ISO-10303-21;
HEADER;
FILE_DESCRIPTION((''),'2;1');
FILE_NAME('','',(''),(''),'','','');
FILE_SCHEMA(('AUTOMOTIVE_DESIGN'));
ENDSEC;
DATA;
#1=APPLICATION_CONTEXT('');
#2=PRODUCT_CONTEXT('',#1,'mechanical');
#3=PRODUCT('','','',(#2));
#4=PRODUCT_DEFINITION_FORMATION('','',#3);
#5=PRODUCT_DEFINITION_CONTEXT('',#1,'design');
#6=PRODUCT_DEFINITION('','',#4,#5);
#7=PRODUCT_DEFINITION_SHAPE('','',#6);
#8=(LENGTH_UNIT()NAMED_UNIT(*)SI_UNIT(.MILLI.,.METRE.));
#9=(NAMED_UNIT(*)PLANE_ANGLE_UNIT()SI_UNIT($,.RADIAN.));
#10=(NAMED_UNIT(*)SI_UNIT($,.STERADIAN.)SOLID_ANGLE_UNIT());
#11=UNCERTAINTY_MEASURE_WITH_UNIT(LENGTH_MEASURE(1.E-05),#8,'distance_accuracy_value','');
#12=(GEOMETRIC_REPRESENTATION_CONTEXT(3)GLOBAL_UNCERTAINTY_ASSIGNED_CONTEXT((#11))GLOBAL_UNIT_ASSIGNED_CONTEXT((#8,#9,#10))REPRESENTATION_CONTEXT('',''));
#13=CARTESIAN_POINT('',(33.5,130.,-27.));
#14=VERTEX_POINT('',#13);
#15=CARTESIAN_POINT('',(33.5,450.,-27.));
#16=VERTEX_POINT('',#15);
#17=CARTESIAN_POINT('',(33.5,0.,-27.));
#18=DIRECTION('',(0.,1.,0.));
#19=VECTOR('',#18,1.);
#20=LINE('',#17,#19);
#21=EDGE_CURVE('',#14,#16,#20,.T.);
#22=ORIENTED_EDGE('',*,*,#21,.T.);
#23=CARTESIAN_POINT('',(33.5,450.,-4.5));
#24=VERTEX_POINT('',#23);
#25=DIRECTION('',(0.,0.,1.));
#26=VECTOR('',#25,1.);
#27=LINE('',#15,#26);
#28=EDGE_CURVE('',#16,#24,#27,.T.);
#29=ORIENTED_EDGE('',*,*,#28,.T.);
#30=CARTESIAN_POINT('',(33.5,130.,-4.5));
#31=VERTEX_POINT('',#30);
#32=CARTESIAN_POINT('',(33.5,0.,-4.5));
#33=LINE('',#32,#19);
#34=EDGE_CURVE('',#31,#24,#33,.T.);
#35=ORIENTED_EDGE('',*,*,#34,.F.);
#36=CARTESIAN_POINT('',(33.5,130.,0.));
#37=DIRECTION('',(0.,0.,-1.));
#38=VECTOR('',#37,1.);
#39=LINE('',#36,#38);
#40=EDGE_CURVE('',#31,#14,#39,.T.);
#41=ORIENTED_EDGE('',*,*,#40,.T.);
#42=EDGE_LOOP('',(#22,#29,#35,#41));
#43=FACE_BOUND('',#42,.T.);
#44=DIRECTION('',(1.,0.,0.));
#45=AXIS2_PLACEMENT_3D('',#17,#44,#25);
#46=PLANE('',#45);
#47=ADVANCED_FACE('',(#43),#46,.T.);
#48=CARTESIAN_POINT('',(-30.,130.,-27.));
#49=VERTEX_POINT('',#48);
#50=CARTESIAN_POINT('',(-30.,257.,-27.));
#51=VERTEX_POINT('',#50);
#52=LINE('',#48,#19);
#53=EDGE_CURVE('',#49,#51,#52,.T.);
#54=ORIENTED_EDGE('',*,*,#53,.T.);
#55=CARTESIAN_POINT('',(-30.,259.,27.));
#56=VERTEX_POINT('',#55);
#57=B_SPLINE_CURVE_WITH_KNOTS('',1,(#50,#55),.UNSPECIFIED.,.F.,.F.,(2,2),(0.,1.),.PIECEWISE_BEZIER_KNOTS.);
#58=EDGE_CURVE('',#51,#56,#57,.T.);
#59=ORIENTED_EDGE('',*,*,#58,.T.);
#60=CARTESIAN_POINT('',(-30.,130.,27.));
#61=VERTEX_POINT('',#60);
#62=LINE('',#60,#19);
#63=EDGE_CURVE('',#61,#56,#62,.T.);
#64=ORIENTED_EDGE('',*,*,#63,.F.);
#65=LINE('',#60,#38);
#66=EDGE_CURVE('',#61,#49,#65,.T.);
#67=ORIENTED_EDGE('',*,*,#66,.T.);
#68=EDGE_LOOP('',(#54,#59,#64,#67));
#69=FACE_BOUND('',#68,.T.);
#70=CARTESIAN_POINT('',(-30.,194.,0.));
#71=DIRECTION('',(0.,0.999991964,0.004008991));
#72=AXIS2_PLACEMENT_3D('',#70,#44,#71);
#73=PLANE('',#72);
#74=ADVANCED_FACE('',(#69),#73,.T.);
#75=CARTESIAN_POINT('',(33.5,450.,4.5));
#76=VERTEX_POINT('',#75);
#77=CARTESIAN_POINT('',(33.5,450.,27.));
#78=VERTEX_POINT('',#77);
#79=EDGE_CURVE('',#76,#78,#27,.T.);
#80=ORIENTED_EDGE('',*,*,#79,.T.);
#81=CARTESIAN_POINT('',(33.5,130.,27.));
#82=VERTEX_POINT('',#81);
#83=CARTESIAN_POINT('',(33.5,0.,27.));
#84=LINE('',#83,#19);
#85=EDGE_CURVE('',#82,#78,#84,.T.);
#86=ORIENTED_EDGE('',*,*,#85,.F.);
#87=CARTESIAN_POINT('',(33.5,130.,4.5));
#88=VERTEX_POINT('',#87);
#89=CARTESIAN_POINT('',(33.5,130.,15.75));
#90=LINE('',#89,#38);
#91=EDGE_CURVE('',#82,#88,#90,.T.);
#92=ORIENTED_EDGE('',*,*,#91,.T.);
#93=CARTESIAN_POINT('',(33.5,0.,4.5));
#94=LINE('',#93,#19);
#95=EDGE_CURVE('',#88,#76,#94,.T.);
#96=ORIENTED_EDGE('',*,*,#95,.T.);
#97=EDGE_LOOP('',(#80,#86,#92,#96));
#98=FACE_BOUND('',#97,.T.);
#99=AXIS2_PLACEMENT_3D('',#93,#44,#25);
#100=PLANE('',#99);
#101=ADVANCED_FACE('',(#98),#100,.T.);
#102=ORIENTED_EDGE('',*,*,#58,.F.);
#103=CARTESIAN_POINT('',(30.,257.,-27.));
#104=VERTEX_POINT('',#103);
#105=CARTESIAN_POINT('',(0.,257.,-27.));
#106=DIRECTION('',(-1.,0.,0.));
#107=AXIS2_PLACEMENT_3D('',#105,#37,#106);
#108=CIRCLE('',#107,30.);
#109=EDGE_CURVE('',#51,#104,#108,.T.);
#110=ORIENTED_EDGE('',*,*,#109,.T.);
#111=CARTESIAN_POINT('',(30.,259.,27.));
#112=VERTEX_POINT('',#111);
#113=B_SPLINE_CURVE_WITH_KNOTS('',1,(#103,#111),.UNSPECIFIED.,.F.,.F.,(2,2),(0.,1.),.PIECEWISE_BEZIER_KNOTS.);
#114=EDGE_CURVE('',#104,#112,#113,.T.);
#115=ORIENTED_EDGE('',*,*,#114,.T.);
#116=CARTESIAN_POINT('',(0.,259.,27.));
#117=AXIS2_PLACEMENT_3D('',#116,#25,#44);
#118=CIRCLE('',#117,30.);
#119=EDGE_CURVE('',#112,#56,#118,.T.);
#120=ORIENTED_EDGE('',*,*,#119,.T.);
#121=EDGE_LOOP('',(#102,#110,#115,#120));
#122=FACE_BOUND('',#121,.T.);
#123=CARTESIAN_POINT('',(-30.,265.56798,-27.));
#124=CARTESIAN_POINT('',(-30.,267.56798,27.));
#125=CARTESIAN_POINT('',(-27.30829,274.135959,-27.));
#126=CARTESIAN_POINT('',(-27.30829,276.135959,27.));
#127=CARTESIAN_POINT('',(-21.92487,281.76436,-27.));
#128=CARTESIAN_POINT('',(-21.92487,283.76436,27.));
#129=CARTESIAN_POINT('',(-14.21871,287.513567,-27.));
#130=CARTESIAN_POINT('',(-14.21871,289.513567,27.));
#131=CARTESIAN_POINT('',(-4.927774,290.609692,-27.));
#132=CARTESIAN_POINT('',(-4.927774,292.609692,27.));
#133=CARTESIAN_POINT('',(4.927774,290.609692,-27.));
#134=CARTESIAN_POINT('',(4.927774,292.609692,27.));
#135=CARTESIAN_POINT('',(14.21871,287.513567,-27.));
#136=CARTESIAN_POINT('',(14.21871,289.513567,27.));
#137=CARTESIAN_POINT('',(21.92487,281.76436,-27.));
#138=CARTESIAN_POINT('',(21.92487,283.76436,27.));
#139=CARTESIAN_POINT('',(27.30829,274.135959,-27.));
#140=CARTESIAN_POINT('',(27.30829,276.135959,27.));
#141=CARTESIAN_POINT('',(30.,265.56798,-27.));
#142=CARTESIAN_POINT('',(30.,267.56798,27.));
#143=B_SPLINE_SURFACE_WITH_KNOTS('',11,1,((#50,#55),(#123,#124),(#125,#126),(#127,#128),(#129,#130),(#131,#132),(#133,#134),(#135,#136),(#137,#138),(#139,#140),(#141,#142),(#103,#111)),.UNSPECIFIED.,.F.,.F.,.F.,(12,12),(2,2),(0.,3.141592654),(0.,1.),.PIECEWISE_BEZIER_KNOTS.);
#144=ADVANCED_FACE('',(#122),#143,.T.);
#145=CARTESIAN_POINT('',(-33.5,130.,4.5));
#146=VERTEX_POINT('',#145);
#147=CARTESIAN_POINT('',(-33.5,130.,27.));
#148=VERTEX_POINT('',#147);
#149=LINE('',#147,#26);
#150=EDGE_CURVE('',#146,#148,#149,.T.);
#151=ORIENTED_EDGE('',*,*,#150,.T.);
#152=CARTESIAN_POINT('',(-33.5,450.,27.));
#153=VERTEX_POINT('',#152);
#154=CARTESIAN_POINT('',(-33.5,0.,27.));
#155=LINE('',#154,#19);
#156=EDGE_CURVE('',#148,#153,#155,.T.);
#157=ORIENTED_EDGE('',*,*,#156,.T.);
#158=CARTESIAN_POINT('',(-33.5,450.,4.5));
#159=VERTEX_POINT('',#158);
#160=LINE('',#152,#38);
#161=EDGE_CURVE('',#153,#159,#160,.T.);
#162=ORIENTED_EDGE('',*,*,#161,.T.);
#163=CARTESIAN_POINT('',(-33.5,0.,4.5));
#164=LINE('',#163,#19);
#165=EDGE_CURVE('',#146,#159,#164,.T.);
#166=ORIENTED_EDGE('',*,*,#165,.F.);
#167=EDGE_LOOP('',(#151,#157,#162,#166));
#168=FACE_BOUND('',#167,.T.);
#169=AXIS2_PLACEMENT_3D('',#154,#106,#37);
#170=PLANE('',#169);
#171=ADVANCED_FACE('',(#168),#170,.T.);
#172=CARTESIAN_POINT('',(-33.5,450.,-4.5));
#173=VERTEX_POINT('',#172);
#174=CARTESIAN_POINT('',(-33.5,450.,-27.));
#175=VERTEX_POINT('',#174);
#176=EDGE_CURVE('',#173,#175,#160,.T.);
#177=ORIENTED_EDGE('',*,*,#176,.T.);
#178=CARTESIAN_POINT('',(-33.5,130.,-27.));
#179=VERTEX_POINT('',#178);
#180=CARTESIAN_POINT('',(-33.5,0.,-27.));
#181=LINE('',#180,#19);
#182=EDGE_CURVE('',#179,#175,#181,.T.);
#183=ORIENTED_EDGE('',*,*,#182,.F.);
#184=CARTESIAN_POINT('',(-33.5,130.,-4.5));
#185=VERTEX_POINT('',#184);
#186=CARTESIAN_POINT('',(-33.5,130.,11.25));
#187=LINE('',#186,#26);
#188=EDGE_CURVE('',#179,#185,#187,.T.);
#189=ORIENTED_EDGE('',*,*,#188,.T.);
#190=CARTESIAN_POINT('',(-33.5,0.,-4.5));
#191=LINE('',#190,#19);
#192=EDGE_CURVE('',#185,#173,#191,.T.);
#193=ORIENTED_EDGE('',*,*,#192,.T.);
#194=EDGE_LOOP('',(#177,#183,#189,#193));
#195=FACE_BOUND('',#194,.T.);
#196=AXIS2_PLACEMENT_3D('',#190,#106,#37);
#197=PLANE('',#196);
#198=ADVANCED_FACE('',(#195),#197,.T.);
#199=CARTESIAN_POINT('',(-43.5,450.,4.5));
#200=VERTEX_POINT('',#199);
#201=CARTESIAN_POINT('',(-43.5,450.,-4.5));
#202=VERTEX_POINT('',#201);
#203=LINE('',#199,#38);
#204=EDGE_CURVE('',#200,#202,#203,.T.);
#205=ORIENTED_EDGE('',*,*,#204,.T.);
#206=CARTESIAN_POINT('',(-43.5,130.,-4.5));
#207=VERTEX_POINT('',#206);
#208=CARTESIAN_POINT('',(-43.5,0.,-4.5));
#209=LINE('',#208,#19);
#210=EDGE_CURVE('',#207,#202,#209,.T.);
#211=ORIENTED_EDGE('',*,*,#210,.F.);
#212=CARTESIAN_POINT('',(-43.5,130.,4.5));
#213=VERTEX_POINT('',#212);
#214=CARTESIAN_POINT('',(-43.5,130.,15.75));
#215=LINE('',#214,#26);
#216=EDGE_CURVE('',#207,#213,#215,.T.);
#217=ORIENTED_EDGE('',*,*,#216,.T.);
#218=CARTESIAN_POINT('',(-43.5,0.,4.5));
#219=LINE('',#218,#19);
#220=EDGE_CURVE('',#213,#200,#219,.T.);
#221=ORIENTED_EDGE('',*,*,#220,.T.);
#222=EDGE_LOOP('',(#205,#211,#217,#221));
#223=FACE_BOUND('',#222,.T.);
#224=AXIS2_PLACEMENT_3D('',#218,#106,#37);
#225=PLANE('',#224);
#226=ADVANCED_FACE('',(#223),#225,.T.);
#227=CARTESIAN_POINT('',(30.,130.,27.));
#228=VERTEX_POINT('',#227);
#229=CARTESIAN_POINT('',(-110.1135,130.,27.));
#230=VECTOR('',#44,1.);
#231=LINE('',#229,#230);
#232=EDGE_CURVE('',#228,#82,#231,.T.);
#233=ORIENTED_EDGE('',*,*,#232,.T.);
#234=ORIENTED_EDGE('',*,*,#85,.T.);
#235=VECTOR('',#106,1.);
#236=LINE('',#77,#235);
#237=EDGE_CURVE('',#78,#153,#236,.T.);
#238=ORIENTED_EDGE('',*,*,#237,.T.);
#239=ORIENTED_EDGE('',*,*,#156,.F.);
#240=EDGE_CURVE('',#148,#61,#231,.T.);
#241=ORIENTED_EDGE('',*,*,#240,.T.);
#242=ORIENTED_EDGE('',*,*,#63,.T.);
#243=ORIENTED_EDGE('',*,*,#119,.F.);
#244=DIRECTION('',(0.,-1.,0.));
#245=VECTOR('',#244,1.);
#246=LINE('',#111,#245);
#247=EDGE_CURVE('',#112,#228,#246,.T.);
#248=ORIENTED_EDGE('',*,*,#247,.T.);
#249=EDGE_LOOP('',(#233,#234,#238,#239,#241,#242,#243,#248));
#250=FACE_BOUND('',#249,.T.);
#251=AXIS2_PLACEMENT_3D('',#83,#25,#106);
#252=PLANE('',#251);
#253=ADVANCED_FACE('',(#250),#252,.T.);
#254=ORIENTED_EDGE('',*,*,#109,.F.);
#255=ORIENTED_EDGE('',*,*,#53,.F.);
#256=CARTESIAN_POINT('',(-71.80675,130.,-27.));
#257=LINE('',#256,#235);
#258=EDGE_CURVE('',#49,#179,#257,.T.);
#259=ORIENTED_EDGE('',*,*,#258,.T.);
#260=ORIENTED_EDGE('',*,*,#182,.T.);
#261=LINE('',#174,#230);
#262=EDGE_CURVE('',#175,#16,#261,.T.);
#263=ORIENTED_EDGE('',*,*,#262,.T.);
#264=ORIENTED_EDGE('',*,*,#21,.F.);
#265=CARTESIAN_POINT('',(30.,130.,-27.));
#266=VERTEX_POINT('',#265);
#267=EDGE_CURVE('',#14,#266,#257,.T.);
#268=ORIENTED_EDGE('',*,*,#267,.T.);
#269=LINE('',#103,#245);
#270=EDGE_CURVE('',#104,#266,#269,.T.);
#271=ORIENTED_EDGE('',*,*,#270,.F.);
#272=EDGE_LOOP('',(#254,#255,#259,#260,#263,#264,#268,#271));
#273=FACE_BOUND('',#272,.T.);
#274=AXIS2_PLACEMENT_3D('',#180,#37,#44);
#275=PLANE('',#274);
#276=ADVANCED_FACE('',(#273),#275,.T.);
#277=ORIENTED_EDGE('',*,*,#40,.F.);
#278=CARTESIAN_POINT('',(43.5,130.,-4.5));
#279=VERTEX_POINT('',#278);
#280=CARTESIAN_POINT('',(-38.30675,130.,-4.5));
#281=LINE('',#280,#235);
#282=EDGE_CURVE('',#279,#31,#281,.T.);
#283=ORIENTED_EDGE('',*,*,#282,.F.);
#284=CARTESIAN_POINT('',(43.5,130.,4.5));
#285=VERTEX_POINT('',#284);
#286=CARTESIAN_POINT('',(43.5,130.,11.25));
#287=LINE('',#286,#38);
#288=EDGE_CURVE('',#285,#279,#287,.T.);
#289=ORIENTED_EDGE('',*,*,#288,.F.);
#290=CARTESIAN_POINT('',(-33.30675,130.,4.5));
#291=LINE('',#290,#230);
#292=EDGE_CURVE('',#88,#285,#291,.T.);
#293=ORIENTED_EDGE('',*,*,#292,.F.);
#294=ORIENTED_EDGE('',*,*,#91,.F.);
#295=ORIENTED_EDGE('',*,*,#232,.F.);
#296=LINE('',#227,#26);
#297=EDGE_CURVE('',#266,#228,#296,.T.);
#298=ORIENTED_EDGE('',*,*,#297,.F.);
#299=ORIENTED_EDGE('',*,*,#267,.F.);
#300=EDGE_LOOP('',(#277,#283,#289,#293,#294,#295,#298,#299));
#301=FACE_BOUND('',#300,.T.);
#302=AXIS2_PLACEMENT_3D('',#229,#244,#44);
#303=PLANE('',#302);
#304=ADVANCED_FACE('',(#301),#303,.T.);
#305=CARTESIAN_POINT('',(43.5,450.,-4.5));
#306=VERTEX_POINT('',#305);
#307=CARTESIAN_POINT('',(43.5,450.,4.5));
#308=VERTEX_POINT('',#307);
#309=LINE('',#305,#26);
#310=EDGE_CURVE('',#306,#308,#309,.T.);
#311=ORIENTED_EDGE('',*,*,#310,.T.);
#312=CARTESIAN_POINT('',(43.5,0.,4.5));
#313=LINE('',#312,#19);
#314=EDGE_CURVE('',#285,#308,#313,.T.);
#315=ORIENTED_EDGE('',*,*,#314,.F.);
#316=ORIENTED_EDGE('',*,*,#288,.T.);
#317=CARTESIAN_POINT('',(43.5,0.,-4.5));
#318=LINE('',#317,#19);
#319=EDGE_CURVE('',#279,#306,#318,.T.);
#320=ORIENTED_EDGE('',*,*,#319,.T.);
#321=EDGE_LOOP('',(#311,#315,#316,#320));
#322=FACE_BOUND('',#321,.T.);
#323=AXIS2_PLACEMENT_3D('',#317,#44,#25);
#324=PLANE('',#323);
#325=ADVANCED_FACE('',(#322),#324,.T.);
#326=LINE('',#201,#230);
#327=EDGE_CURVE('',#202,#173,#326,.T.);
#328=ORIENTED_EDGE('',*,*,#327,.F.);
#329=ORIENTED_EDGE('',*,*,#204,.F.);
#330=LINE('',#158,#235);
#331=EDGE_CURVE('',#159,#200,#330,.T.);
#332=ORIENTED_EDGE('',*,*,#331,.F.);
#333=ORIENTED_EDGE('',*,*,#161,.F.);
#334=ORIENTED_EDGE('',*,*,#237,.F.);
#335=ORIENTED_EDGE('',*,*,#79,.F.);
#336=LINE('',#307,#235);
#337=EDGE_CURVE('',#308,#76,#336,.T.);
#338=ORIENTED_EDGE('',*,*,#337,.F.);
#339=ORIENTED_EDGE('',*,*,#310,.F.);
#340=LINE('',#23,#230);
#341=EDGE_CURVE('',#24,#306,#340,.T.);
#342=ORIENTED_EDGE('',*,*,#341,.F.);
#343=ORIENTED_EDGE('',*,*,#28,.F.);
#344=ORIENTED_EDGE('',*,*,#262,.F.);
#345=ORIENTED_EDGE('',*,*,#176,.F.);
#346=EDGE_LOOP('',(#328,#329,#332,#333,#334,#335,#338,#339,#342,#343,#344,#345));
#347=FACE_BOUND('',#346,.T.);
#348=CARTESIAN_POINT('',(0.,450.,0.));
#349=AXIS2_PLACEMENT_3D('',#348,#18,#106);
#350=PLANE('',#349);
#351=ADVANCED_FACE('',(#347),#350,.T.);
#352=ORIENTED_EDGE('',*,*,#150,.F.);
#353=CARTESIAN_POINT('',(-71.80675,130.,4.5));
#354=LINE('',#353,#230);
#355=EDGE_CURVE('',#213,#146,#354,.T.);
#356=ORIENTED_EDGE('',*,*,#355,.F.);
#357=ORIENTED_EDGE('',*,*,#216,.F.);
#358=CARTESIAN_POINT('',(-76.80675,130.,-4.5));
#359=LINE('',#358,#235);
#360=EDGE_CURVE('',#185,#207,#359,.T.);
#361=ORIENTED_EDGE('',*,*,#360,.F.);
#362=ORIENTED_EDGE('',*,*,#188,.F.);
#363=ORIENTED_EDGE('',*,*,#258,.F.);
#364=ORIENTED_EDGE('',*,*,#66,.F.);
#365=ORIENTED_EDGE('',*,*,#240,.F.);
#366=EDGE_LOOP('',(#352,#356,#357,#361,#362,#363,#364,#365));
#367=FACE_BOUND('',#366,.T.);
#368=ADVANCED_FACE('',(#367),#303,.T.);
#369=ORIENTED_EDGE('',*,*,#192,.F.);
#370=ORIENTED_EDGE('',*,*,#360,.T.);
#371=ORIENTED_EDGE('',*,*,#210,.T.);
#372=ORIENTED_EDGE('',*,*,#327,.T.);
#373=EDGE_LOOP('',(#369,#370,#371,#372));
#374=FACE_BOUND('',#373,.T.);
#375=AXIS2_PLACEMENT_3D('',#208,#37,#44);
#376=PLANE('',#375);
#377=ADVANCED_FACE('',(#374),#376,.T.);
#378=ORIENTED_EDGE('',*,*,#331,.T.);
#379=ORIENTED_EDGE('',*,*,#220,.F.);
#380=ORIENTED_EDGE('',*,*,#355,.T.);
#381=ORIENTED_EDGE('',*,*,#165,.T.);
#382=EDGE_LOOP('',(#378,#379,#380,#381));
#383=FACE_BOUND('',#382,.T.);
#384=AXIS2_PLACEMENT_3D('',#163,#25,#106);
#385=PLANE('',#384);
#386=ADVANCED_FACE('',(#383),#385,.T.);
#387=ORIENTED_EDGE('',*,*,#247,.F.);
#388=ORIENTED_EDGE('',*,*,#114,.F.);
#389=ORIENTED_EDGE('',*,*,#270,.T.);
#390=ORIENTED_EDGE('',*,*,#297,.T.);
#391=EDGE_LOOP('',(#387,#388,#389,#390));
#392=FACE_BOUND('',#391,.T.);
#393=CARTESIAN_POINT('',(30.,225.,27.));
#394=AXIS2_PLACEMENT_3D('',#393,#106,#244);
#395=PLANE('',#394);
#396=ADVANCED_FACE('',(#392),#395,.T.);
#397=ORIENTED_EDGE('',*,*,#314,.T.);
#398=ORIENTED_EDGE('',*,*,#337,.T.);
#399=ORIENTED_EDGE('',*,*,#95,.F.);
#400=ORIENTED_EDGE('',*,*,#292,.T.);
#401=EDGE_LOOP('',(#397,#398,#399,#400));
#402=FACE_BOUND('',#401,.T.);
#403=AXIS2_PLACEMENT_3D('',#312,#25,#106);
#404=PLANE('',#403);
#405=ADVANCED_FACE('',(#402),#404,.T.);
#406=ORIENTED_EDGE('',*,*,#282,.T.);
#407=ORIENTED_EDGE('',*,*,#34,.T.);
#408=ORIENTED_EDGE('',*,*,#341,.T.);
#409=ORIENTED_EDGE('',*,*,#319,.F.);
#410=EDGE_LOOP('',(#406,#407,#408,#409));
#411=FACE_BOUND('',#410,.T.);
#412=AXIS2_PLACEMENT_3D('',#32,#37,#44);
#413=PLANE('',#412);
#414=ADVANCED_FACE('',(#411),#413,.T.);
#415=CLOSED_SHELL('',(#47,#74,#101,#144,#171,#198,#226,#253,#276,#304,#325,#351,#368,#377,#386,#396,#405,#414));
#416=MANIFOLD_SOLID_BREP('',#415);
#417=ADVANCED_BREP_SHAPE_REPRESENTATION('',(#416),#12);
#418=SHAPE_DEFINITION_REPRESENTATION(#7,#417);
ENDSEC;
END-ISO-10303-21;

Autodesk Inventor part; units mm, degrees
ref_plane "YZ Plane" through (0, 0, 0) normal (1, 0, 0) x (0, 1, 0)
ref_plane "XZ Plane" through (0, 0, 0) normal (0, 1, 0) x (-1, 0, 0)
ref_plane "XY Plane" through (0, 0, 0) normal (0, 0, 1) x (1, 0, 0)
sketch "草圖1" plane through (0, 0, 0) normal (0, 1, 0) x (-1, 0, 0)
  line L0 (-33.5, 27) -> (33.5, 27)
  line L1 (33.5, 27) -> (33.5, -27)
  line L2 (33.5, -27) -> (-33.5, -27)
  line L3 (-33.5, -27) -> (-33.5, 27)
  line L4 (-33.5, 27) -> (33.5, -27) construction
  line L5 (33.5, 27) -> (-33.5, -27) construction
  line L6 (43.5, -4.5) -> (33.5, -4.5)
  line L7 (33.5, -4.5) -> (33.5, 4.5)
  line L8 (33.5, 4.5) -> (43.5, 4.5)
  line L9 (43.5, 4.5) -> (43.5, -4.5)
  line L10 (-33.5, -4.5) -> (-43.5, -4.5)
  line L11 (-43.5, -4.5) -> (-43.5, 4.5)
  line L12 (-43.5, 4.5) -> (-33.5, 4.5)
  line L13 (-33.5, 4.5) -> (-33.5, -4.5)
  point P0 (0, 0)
  point P1 (33.5, 0)
  point P2 (-33.5, 0)
  point P3 (-33.5, 4.5)
  point P4 (-33.5, -4.5)
  dimension "d0" = 67
  dimension "d1" = 54
  dimension "d2" = 9
  dimension "d3" = 10
extrude "擠出1" add sketch "草圖1" along normal blind 450
sketch "草圖2" plane through (-33.5, 0, 27) normal (0, 0, 1) x (1, 0, 0)
  line L0 (0, 0) -> (0, 450) projected
  line L1 (0, 450) -> (67, 450) projected
  line L2 (67, 450) -> (67, 0) projected
  line L3 (67, 0) -> (0, 0) projected
  circle A0 centre (33.5, 225) radius 30
  line L4 (3.5, 225) -> (63.5, 225)
  line L5 (63.5, 225) -> (63.5, -27.0162)
  line L6 (63.5, -27.0162) -> (3.5, -27.0162)
  line L7 (3.5, -27.0162) -> (3.5, 225)
  point P0 (33.5, 0)
  point P1 (33.5, 0)
  point P2 (63.5, 225)
  point P3 (3.5, 225)
  dimension "d6" = 225
  dimension "d7" = 60
extrude "擠出2" cut sketch "草圖2" against normal through all contours L7 A0 L5 L3 | L3 L5 L6 L7 | L4 A0 | A0 L4
sketch "草圖3" plane through (-33.5, 450, 27) normal (0, 0, 1) x (1, 0, 0)
  line L0 (-76.6135, -320) -> (143.6135, -320)
  line L1 (143.6135, -320) -> (143.6135, -450)
  line L2 (143.6135, -450) -> (-76.6135, -450)
  line L3 (-76.6135, -450) -> (-76.6135, -320)
  point P0 (33.5, -450)
  point P1 (33.5, -450)
  dimension "d10" = 130
extrude "擠出3" cut sketch "草圖3" against normal through all
sketch "草圖4" plane through (33.5, 450, -27) normal (0, 0, -1) x (-1, 0, 0)
  arc A0 (63.5, -225) -> (3.5, -225) centre (33.5, -225) ccw construction
  circle A1 centre (33.5, -193) radius 30
  line L0 (63.5, -320) -> (3.5, -320)
  line L1 (3.5, -320) -> (3.5, -193)
  line L2 (3.5, -193) -> (63.5, -193)
  line L3 (63.5, -193) -> (63.5, -320)
  point P0 (33.5, -450)
  point P1 (63.5, -320)
  dimension "d13" = 32
  dimension "d14" = 60
sketch "草圖5" plane through (-33.5, 450, 27) normal (0, 0, 1) x (1, 0, 0)
  circle A0 centre (33.5, -191) radius 30
  arc A1 (63.5, -225) -> (3.5, -225) centre (33.5, -225) ccw construction
  line L0 (63.5, -320) -> (3.5, -320)
  line L1 (3.5, -320) -> (3.5, -191)
  line L2 (3.5, -191) -> (63.5, -191)
  line L3 (63.5, -191) -> (63.5, -320)
  point P0 (33.5, -450)
  point P1 (63.5, -320)
  dimension "d15" = 34
  dimension "d16" = 60
loft "斷面混成1" cut profiles "草圖4", "草圖5"
properties part number "Slider-9"
